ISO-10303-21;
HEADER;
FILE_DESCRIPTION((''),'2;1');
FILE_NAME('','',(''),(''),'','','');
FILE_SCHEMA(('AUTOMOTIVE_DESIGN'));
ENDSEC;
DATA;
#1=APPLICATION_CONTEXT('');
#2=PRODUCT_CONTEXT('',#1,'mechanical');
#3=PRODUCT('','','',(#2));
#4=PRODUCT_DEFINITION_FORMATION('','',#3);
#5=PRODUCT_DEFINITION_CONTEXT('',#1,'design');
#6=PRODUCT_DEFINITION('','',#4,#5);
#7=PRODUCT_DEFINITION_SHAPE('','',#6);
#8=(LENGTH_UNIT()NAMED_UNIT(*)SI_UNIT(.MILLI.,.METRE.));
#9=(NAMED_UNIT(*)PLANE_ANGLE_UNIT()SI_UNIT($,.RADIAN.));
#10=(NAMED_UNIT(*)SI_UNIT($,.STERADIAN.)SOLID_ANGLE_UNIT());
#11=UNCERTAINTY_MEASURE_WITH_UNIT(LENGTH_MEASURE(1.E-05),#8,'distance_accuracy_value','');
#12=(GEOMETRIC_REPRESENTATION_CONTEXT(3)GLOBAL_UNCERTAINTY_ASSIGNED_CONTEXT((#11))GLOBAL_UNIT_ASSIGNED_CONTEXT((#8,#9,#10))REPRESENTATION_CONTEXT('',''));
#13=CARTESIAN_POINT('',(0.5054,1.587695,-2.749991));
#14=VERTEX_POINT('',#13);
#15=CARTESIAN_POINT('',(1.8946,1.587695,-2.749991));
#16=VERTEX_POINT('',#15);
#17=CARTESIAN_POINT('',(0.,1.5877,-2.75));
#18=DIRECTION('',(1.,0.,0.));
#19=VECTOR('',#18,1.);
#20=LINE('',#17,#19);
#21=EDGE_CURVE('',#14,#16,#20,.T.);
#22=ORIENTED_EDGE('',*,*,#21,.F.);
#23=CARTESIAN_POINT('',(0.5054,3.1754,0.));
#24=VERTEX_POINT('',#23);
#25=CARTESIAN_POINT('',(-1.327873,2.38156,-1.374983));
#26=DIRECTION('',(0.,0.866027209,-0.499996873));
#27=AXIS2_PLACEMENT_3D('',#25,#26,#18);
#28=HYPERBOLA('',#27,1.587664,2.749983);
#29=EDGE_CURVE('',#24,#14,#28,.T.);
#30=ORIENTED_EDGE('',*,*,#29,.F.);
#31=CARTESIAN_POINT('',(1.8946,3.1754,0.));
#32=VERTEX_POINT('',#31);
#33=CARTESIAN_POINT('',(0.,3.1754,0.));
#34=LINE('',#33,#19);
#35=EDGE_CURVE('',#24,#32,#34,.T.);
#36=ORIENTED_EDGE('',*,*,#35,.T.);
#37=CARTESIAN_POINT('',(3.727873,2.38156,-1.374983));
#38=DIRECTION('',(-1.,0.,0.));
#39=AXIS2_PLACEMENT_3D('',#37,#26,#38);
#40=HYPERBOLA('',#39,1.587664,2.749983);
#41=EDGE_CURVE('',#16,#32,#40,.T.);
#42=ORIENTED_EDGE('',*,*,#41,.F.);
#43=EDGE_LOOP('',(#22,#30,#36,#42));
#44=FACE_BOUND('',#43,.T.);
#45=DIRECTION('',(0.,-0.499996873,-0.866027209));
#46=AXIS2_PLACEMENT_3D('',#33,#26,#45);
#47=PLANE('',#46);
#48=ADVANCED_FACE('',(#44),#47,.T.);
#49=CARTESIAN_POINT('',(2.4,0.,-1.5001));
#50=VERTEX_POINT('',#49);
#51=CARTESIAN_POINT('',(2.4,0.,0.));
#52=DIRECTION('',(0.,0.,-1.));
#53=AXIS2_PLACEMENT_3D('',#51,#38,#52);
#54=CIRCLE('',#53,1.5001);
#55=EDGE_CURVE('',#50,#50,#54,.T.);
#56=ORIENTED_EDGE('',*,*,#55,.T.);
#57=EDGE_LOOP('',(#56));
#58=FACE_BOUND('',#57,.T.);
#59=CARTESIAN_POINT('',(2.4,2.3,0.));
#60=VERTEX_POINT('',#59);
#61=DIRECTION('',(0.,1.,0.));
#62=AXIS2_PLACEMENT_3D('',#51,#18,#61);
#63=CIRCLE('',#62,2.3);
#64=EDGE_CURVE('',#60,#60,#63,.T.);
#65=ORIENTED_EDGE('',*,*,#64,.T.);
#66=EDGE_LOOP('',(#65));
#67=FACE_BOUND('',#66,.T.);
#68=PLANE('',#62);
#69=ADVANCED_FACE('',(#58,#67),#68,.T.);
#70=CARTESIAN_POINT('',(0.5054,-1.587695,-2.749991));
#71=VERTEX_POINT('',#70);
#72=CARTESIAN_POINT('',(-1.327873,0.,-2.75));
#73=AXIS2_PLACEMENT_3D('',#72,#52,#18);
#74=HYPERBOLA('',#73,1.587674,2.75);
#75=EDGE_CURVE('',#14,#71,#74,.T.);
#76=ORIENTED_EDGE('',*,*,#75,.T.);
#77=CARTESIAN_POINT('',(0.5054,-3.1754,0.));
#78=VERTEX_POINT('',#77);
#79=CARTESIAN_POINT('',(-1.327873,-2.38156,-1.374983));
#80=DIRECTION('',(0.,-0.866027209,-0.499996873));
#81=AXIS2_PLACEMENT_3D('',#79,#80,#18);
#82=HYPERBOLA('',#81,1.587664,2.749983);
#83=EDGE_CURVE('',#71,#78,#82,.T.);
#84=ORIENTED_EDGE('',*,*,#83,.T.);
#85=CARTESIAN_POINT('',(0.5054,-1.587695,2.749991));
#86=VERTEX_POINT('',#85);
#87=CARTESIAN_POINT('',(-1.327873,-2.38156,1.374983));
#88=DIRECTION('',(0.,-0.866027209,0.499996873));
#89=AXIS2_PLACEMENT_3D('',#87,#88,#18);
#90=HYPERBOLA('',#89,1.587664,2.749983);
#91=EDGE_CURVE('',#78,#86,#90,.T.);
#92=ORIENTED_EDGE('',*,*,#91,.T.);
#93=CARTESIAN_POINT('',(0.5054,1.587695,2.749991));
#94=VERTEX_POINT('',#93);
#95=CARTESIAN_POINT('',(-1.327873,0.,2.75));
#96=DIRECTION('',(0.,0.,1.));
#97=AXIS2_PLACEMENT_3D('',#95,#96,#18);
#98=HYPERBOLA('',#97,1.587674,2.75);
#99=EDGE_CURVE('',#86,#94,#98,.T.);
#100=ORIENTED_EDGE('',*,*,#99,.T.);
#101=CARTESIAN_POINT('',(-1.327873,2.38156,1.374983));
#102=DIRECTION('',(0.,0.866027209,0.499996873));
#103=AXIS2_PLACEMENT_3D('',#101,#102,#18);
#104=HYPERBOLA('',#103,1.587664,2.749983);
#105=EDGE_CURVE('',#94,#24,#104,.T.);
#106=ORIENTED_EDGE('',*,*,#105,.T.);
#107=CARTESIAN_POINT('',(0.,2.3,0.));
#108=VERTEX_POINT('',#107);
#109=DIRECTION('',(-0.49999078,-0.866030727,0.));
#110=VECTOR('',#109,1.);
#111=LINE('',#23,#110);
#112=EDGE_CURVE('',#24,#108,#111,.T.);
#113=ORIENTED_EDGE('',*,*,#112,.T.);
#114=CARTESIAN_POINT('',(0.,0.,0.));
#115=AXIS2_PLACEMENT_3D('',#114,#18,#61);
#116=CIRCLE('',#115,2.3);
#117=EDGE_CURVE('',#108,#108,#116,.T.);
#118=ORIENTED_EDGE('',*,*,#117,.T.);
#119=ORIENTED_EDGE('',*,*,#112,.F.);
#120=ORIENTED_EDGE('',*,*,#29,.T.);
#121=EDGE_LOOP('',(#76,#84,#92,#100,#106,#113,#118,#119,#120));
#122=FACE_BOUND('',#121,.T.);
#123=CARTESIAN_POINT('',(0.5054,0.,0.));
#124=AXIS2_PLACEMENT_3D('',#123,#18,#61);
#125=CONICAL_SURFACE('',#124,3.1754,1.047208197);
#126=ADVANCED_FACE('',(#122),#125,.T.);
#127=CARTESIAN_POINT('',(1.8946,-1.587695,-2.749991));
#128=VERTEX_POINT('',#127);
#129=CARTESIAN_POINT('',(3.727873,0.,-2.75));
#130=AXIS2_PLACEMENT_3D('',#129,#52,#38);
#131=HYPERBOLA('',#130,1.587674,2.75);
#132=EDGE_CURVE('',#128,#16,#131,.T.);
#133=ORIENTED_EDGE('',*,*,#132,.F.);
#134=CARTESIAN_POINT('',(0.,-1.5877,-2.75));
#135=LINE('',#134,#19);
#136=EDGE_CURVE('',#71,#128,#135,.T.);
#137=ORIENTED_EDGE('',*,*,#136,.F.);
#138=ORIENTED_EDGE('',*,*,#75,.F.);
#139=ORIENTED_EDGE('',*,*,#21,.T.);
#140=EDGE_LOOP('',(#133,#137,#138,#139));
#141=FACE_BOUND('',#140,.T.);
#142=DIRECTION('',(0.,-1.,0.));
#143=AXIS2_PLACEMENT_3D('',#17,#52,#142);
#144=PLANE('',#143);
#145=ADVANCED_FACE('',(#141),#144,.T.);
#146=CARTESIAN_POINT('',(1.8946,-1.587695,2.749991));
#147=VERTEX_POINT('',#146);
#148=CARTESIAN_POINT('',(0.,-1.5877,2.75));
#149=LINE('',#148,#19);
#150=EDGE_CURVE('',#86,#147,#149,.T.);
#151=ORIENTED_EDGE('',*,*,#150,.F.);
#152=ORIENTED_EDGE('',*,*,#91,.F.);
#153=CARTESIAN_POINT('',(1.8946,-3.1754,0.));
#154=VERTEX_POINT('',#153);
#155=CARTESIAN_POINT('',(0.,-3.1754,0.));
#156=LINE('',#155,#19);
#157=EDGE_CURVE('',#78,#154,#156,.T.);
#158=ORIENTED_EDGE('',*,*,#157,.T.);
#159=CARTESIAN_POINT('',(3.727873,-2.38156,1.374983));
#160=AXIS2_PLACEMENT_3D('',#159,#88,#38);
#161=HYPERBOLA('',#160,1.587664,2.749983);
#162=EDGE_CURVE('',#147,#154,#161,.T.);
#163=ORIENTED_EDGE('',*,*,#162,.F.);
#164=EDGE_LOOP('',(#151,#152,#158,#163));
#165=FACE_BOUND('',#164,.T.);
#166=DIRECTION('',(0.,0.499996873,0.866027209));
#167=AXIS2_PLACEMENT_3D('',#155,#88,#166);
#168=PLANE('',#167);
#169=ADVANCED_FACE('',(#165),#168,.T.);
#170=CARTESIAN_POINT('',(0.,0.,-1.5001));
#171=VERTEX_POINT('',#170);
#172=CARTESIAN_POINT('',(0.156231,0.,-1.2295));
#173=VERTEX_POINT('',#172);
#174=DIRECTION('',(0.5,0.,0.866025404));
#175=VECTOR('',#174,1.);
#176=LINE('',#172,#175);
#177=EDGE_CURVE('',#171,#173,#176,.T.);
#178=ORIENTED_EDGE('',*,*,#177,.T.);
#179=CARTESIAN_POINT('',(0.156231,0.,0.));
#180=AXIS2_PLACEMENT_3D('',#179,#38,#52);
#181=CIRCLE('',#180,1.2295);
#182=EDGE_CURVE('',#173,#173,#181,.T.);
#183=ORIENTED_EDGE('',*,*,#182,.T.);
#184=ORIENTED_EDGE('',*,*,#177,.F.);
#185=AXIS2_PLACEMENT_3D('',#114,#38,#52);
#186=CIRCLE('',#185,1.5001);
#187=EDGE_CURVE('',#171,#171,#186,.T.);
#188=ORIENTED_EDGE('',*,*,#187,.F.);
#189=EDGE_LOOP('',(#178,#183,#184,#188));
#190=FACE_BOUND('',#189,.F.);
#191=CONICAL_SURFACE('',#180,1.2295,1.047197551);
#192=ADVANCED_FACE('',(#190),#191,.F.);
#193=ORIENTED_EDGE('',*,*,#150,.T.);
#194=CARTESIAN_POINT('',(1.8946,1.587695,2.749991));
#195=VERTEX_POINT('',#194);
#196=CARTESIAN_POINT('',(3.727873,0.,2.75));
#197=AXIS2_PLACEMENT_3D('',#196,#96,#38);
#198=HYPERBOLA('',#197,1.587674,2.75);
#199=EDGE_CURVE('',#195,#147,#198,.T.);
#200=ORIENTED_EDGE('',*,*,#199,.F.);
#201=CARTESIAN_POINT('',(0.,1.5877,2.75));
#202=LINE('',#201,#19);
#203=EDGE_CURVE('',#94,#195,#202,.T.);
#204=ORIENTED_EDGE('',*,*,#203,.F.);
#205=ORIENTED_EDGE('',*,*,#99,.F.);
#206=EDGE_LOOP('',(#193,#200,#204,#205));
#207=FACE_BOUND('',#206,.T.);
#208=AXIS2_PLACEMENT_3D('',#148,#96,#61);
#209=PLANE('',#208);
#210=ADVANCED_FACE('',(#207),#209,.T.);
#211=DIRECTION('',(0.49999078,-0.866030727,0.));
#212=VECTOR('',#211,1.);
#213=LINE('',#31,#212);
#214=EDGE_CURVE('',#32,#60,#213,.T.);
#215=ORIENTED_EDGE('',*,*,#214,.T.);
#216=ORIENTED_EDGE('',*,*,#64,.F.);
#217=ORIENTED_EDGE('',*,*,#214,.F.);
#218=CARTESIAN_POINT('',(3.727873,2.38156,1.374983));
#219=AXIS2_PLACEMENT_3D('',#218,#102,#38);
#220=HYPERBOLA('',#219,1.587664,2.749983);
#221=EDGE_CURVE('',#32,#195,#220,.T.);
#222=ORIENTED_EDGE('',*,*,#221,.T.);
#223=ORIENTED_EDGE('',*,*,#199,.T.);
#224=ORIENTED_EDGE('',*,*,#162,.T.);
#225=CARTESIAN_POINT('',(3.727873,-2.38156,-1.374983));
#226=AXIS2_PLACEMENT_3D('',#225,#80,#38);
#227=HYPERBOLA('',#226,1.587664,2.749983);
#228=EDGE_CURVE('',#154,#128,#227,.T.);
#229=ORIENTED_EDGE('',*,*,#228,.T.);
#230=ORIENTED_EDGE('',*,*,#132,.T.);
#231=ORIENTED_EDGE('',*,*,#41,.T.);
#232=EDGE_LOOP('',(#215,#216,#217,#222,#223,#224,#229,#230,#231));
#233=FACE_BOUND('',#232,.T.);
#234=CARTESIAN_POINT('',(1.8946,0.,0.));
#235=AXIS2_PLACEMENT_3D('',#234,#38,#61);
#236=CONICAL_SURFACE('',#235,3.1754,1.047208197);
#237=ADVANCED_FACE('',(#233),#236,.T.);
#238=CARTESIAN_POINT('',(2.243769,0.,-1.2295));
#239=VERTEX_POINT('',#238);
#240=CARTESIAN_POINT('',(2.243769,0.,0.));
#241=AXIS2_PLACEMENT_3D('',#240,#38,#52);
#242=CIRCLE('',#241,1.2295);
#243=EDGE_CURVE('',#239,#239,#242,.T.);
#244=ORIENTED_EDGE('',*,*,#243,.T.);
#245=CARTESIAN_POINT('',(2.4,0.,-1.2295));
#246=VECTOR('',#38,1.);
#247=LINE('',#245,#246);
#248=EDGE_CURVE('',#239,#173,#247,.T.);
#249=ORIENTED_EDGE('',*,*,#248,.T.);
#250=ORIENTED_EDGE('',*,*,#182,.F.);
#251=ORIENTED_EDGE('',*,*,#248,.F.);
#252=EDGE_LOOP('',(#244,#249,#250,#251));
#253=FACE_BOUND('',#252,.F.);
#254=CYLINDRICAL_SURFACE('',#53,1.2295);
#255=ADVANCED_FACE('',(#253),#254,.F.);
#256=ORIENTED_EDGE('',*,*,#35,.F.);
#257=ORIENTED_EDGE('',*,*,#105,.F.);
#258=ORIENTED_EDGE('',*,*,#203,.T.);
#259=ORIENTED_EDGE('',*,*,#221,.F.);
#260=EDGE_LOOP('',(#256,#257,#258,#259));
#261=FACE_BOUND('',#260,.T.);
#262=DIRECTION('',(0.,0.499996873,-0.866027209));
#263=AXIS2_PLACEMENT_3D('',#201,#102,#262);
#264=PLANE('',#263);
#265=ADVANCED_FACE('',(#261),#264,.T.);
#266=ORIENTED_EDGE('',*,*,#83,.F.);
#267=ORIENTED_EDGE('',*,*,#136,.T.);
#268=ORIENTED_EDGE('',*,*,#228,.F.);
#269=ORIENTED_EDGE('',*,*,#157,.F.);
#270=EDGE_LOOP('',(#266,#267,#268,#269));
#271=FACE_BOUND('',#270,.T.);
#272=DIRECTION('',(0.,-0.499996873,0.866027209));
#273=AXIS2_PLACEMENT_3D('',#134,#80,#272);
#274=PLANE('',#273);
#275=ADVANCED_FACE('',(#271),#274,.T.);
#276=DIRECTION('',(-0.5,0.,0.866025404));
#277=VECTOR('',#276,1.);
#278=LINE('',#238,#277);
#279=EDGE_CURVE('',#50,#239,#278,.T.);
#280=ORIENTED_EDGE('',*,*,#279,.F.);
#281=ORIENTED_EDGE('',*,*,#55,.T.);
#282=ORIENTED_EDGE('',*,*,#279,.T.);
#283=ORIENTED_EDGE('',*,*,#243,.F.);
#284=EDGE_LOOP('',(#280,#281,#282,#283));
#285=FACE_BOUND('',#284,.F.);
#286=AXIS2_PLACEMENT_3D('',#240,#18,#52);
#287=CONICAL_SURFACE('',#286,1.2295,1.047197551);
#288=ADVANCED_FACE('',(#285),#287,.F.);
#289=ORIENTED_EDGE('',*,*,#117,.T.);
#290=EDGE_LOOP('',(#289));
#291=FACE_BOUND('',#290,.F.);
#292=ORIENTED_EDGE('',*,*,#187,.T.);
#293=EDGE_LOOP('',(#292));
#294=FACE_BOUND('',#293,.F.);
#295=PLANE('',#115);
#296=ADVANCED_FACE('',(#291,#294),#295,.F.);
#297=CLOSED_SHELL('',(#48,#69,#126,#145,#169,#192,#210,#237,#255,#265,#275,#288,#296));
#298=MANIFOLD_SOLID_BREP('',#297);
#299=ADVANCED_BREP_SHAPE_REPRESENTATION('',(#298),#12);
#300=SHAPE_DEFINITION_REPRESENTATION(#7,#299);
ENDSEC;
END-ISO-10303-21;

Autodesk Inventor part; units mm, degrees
ref_plane "YZ Plane" through (0, 0, 0) normal (1, 0, 0) x (0, 1, 0)
ref_plane "XZ Plane" through (0, 0, 0) normal (0, 1, 0) x (-1, 0, 0)
sketch "Esquisse1" plane through (0, 0, 0) normal (1, 0, 0) x (0, 1, 0)
  line L0 (-3.1754, 0) -> (-1.5877, 2.75)
  line L1 (-1.5877, 2.75) -> (1.5877, 2.75)
  line L2 (1.5877, 2.75) -> (3.1754, 0)
  line L3 (3.1754, 0) -> (1.5877, -2.75)
  line L4 (1.5877, -2.75) -> (-1.5877, -2.75)
  line L5 (-1.5877, -2.75) -> (-3.1754, 0)
  point P0 (0, 0)
  point P1 (0, 0)
  dimension "d0" = 6.3509
extrude "Corps" add sketch "Esquisse1" along normal blind 2.4
sketch "Esquisse2" plane through (0, 0, 0) normal (0, 0, 1) x (1, 0, 0)
  line L0 (0, 1.5877) -> (0, 3.1754) projected
  line L1 (0, 3.1754) -> (2.4, 3.1754) projected
  line L2 (2.4, 1.5877) -> (2.4, 3.1754) projected
  line L3 (-0.48, 0) -> (2.88, 0) projected
  line L4 (0.5054, 3.1754) -> (0, 2.3)
  line L5 (1.8946, 3.1754) -> (2.4, 2.3)
  dimension "d3" = 30
  dimension "d4" = 30
  dimension "d5" = 4.6
  dimension "d6" = 4.6
revolve "Chanfrein1" cut sketch "Esquisse2" angle 360 about axis through (-10, 0, 0) along (1, 0, 0)
sketch "Esquisse3" plane through (2.4, 0, 0) normal (1, 0, 0) x (0, 0, -1)
  arc A0 (-0.625, -1.0825) -> (0.625, -1.0825) centre (0, 0) ccw projected
hole "Filetage" at (2.4, 0, 0) direction (-1, 0, 0) diameter 2.459 end through all thread size "M3x0.5" class "6H" standard "ISO Metric profile"
chamfer "Chanfrein2" distance 0.2706 angle 30 1 edges at (2.4, 0, 1.2295) measured on face at (2.4, 1.9179, -0.2329)
chamfer "Chanfrein3" distance 0.2706 angle 30 1 edges at (0, 0, 1.2295) measured on face at (0, 1.9179, -0.2329)
ref_plane "Work Plane1" through (-6.3375, 0, 0) normal (0, -0.8660254, -0.5) x (1, 0, 0)
equation "\"d0\" = 1.1547 * SW"
equation "\"d1\" = KOH"
equation "\"d3\" = ANG1"
equation "\"d4\" = ANG2"
equation "\"d5\" = SW0"
equation "\"d6\" = SW01"
equation "\"d8\" = -0.5 * GD1 + 0.5 * NND"
equation "\"d40\" = -0.5 * GD1 + 0.5 * NND"
equation "\"d10\" = -0.5 * GD1 + 0.5 * NND"
equation "\"d41\" = -0.5 * GD1 + 0.5 * NND"
equation "\"ANG1\" = 30deg"
equation "\"ANG2\" = 30deg"
equation "\"NND\" = 3"
equation "\"KOH\" = 2.4"
equation "\"SW\" = 5.5"
equation "\"SW0\" = 4.6"
equation "\"SW01\" = SW0"
equation "\"GUL\" = 0.541266 * PTC"
equation "\"THREADDIA\" = 3"
equation "\"TOA\" = 30deg"
equation "\"PTC\" = 0.5"
equation "\"E0\" = 1.155 * SW"
equation "\"GAL\" = 0.541266 * PTC"
equation "\"GD1\" = 2.458734"
properties part number "ISO 4032 - M3" material "Acier inoxydable 440C"
